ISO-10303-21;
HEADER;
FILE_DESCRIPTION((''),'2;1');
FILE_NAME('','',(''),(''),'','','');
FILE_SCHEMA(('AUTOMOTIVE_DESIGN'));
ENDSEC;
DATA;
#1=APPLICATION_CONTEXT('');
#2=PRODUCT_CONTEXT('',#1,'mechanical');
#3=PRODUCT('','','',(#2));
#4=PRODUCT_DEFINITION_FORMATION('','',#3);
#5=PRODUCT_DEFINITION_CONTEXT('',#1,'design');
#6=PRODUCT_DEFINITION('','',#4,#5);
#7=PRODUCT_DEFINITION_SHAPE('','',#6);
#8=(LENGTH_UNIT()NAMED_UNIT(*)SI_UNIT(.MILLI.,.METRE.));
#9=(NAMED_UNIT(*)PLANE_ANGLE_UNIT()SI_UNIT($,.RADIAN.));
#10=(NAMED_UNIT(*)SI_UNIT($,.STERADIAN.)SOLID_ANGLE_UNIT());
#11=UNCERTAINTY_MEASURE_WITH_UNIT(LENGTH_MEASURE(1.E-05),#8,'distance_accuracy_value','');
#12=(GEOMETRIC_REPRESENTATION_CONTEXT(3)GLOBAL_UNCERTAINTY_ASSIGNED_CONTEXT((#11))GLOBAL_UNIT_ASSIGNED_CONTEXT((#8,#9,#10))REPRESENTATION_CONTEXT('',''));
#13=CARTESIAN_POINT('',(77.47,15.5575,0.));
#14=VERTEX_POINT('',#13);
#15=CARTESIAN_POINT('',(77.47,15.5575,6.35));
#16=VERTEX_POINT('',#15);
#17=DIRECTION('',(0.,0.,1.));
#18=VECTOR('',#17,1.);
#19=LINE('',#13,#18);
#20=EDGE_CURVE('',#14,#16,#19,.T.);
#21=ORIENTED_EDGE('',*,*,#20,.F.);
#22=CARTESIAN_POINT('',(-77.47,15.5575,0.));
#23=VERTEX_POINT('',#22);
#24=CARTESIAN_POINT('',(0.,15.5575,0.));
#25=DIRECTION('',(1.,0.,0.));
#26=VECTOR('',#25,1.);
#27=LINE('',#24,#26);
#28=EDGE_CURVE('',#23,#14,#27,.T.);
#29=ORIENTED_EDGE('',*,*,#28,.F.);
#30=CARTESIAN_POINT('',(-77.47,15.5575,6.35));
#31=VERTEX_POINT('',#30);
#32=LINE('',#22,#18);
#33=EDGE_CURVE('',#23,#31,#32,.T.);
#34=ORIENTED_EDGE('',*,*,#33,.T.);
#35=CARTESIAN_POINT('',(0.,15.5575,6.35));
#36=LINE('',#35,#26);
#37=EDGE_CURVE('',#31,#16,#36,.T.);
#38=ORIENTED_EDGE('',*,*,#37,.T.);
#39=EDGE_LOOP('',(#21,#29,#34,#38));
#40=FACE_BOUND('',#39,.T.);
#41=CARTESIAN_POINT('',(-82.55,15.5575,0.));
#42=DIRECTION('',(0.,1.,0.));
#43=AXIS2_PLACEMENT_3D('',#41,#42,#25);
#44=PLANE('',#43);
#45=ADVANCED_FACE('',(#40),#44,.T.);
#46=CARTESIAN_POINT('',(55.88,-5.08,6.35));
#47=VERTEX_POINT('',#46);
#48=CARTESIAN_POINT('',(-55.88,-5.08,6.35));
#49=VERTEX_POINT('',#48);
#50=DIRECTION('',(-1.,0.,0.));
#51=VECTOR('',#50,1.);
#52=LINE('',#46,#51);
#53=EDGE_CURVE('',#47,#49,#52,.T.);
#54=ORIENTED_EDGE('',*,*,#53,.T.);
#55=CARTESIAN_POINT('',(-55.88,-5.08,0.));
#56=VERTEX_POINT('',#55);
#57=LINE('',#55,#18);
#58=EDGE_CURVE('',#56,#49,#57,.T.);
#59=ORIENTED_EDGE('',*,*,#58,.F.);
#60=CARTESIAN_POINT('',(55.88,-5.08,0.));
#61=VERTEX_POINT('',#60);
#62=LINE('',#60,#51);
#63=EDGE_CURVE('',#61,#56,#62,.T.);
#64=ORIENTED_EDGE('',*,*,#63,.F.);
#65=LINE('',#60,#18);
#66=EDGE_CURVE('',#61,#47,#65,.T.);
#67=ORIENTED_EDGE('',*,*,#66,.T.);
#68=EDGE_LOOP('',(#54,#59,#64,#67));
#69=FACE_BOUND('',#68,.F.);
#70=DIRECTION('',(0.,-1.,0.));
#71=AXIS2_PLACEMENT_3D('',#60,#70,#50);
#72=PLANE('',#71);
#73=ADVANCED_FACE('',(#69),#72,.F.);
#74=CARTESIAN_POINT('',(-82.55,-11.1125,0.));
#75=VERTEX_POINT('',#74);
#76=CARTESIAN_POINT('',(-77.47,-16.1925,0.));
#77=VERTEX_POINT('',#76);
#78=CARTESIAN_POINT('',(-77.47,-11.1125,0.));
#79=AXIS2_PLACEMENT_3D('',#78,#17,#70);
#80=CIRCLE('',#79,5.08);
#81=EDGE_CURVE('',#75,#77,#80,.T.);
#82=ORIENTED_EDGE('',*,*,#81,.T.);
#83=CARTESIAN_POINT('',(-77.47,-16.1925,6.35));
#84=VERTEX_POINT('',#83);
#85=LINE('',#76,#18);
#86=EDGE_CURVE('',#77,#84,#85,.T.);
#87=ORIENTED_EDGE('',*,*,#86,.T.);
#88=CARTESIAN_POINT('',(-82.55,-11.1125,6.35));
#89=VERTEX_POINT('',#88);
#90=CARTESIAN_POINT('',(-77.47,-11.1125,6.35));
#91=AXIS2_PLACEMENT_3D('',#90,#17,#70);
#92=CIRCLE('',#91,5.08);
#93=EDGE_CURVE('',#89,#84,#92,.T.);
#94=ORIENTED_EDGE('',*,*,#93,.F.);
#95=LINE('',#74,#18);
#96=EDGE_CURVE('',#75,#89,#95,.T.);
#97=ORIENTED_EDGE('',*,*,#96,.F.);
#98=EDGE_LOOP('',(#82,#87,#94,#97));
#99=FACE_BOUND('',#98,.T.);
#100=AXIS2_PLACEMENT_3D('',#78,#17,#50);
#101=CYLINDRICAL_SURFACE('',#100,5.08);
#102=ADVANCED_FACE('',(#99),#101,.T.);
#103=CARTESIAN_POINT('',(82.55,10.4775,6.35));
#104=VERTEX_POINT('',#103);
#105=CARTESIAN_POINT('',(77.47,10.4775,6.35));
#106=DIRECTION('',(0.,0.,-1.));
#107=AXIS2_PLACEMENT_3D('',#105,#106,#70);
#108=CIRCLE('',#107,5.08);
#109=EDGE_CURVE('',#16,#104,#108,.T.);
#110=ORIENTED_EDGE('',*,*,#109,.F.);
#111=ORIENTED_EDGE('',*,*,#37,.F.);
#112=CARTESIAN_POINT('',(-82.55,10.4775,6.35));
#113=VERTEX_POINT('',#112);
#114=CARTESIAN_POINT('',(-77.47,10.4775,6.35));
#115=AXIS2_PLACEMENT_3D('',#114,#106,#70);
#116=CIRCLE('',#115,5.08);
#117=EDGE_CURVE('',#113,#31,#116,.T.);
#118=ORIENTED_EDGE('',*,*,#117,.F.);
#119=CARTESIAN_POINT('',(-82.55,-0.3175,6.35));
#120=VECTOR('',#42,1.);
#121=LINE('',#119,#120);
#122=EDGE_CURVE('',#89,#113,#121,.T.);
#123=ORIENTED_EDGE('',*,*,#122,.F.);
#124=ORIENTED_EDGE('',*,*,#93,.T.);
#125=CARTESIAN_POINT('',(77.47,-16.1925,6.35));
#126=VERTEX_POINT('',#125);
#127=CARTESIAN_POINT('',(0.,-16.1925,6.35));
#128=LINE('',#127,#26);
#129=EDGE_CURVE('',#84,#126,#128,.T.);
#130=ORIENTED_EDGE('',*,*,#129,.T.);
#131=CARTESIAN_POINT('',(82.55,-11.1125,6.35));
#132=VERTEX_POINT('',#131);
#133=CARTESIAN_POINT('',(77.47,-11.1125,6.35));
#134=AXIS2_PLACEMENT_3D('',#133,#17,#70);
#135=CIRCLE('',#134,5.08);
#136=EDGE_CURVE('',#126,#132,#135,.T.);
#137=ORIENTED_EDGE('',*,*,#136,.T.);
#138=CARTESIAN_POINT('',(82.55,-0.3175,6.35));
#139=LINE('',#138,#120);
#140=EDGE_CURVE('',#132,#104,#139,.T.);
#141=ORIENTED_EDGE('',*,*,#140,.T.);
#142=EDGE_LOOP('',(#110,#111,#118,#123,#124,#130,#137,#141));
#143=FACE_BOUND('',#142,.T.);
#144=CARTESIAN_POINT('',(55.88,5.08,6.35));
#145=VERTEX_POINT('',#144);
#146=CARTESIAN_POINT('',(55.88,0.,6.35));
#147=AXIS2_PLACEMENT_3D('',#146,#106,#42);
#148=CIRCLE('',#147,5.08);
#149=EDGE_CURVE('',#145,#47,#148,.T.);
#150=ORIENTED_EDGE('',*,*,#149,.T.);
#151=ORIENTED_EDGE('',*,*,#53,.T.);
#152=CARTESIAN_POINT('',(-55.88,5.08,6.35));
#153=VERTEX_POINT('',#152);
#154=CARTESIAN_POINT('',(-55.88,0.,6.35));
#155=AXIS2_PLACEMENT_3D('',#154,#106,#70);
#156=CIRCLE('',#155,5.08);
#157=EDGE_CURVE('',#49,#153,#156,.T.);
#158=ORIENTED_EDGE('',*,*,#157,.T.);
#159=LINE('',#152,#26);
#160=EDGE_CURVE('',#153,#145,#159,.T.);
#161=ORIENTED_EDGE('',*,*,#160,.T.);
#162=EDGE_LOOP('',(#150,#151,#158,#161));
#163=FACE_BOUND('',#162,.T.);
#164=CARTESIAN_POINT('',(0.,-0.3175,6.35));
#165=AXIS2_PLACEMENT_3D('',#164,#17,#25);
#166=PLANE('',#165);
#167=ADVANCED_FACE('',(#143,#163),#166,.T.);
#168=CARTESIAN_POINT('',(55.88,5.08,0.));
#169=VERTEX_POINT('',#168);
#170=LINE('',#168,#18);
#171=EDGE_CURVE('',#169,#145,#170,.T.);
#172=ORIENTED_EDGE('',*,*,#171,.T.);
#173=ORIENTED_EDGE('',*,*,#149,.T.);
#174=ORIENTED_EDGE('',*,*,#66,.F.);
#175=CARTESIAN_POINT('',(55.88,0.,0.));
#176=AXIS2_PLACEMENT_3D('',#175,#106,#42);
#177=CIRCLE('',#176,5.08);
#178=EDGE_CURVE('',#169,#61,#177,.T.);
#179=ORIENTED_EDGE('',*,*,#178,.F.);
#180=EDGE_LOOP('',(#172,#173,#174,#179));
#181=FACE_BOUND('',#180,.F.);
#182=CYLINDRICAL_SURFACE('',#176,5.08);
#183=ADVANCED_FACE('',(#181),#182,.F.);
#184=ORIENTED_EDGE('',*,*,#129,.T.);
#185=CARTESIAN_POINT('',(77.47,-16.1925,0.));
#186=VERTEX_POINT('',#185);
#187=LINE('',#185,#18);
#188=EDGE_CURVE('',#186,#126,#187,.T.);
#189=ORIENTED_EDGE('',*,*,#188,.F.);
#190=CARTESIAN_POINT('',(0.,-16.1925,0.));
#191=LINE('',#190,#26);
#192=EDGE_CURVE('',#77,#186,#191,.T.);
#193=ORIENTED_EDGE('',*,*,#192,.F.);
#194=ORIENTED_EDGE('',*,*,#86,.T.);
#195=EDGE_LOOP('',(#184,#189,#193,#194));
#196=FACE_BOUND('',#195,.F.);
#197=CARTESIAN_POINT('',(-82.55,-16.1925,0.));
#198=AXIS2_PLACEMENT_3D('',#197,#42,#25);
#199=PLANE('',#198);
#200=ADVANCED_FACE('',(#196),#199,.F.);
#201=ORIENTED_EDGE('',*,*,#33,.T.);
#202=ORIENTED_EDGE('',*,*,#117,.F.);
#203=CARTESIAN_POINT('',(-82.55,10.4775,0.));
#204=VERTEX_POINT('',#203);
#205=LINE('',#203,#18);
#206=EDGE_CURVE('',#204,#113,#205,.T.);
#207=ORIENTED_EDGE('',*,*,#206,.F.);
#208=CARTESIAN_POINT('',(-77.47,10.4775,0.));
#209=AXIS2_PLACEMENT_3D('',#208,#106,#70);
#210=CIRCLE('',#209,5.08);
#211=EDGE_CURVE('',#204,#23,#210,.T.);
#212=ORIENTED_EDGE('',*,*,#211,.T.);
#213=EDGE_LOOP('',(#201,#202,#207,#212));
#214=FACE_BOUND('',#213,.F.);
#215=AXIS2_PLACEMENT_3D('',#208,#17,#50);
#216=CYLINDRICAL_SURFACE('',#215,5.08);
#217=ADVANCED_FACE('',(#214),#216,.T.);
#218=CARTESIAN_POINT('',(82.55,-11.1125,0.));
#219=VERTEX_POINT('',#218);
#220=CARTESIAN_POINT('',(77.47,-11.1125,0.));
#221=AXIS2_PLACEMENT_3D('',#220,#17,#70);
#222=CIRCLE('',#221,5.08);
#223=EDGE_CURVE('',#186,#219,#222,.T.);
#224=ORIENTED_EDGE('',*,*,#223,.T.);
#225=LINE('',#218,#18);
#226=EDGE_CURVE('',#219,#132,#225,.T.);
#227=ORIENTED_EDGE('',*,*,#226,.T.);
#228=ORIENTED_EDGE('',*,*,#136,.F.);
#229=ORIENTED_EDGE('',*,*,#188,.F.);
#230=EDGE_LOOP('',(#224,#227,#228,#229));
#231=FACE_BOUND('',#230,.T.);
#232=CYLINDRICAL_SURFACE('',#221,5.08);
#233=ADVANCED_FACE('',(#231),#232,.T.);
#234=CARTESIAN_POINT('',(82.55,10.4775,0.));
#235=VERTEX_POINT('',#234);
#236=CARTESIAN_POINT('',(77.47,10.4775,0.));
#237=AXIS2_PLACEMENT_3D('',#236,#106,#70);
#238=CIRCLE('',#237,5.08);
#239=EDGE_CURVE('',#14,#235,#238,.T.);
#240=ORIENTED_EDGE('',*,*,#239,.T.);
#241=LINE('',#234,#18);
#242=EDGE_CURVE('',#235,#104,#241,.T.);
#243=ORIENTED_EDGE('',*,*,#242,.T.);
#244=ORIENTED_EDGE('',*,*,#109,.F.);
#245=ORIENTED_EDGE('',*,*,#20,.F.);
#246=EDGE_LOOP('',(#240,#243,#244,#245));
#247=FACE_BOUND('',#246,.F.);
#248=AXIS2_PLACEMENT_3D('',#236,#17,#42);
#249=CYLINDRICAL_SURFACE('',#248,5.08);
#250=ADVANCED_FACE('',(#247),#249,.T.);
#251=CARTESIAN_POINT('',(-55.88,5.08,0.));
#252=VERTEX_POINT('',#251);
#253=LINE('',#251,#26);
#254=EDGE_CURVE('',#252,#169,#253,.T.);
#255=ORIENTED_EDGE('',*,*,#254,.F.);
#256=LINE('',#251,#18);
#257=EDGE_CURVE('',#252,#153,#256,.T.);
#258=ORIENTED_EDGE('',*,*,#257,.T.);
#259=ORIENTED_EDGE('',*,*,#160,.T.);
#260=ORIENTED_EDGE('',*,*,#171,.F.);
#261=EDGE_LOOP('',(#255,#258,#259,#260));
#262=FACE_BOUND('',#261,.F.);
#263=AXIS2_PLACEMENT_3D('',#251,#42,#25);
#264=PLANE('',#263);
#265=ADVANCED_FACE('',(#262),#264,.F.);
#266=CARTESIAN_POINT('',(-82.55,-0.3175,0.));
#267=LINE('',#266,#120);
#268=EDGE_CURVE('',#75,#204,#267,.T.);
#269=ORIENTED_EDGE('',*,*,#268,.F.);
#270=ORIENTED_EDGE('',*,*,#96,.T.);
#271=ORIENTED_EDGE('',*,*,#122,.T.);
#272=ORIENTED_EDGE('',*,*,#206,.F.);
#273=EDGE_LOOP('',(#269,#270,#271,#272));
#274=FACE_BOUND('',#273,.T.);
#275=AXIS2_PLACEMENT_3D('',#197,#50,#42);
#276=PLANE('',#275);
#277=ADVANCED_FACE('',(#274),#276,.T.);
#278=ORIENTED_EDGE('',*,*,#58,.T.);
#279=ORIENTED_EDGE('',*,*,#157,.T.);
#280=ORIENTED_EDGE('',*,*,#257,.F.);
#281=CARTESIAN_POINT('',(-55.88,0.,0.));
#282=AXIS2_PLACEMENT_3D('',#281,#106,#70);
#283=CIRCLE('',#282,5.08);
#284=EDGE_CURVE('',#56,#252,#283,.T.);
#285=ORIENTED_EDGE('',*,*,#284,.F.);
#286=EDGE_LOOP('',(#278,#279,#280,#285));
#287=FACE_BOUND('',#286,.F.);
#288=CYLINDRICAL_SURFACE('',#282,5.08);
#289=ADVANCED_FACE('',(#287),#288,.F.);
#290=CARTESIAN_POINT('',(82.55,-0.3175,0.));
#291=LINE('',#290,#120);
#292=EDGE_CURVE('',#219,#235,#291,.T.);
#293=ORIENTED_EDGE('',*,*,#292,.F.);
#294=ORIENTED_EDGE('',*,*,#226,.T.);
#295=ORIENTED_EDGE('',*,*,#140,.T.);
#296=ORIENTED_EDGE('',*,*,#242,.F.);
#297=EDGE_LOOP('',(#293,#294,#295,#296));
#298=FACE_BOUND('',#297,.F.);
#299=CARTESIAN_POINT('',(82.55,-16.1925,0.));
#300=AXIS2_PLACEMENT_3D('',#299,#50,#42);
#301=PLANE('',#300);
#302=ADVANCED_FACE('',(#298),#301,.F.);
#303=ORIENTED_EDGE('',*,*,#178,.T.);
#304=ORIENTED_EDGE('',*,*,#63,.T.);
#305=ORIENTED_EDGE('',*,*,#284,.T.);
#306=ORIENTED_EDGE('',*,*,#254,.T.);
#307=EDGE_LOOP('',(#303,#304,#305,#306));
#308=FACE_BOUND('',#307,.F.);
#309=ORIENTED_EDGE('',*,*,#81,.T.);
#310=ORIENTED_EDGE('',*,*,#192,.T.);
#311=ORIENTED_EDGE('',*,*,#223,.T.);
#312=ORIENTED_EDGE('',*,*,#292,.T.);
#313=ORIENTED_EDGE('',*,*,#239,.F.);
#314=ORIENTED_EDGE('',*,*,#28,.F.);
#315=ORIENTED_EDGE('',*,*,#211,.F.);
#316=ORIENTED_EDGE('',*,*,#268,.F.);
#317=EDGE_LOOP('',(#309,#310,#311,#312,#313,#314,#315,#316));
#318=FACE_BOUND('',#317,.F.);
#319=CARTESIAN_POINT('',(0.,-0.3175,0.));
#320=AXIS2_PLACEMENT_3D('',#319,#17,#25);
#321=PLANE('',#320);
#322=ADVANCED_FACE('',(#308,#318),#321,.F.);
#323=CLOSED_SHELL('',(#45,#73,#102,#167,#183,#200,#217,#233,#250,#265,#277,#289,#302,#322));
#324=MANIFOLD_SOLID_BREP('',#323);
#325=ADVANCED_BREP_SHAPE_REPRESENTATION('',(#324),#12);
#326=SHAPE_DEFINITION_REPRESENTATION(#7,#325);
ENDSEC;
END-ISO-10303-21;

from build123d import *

# Parameters (mm, degrees)
F1_W     = 165.1
F1_H     = 31.75
F2_DEPTH = 6.35
F3_R     = 5.08


# Not quite as in the source:
# - a variable given as a bare number and used for a length is read in inches; the dataset says mm whatever the document's units were


with BuildPart() as f2:
    # F1 (on Top) → F2 (new body)
    with BuildSketch(Plane.XY):
        with Locations((0, -0.3175)):
            Rectangle(F1_W, F1_H)
        with BuildLine():
            ThreePointArc((-55.88, -5.08), (-60.96, 0), (-55.88, 5.08))
            Line((-55.88, 5.08), (0, 5.08))
            Line((0, 5.08), (55.88, 5.08))
            ThreePointArc((55.88, 5.08), (60.96, 0), (55.88, -5.08))
            Line((55.88, -5.08), (0, -5.08))
            Line((0, -5.08), (-55.88, -5.08))
        make_face(mode=Mode.SUBTRACT)
    extrude(amount=F2_DEPTH)

    # F3
    f3_edges = [f2.edges().sort_by_distance(p)[0] for p in [
        (-82.55, 15.5575, 3.175),
        (-82.55, -16.1925, 3.175),
        (82.55, 15.5575, 3.175),
        (82.55, -16.1925, 3.175),
    ]]
    fillet(f3_edges, radius=F3_R)


solid = f2.part
